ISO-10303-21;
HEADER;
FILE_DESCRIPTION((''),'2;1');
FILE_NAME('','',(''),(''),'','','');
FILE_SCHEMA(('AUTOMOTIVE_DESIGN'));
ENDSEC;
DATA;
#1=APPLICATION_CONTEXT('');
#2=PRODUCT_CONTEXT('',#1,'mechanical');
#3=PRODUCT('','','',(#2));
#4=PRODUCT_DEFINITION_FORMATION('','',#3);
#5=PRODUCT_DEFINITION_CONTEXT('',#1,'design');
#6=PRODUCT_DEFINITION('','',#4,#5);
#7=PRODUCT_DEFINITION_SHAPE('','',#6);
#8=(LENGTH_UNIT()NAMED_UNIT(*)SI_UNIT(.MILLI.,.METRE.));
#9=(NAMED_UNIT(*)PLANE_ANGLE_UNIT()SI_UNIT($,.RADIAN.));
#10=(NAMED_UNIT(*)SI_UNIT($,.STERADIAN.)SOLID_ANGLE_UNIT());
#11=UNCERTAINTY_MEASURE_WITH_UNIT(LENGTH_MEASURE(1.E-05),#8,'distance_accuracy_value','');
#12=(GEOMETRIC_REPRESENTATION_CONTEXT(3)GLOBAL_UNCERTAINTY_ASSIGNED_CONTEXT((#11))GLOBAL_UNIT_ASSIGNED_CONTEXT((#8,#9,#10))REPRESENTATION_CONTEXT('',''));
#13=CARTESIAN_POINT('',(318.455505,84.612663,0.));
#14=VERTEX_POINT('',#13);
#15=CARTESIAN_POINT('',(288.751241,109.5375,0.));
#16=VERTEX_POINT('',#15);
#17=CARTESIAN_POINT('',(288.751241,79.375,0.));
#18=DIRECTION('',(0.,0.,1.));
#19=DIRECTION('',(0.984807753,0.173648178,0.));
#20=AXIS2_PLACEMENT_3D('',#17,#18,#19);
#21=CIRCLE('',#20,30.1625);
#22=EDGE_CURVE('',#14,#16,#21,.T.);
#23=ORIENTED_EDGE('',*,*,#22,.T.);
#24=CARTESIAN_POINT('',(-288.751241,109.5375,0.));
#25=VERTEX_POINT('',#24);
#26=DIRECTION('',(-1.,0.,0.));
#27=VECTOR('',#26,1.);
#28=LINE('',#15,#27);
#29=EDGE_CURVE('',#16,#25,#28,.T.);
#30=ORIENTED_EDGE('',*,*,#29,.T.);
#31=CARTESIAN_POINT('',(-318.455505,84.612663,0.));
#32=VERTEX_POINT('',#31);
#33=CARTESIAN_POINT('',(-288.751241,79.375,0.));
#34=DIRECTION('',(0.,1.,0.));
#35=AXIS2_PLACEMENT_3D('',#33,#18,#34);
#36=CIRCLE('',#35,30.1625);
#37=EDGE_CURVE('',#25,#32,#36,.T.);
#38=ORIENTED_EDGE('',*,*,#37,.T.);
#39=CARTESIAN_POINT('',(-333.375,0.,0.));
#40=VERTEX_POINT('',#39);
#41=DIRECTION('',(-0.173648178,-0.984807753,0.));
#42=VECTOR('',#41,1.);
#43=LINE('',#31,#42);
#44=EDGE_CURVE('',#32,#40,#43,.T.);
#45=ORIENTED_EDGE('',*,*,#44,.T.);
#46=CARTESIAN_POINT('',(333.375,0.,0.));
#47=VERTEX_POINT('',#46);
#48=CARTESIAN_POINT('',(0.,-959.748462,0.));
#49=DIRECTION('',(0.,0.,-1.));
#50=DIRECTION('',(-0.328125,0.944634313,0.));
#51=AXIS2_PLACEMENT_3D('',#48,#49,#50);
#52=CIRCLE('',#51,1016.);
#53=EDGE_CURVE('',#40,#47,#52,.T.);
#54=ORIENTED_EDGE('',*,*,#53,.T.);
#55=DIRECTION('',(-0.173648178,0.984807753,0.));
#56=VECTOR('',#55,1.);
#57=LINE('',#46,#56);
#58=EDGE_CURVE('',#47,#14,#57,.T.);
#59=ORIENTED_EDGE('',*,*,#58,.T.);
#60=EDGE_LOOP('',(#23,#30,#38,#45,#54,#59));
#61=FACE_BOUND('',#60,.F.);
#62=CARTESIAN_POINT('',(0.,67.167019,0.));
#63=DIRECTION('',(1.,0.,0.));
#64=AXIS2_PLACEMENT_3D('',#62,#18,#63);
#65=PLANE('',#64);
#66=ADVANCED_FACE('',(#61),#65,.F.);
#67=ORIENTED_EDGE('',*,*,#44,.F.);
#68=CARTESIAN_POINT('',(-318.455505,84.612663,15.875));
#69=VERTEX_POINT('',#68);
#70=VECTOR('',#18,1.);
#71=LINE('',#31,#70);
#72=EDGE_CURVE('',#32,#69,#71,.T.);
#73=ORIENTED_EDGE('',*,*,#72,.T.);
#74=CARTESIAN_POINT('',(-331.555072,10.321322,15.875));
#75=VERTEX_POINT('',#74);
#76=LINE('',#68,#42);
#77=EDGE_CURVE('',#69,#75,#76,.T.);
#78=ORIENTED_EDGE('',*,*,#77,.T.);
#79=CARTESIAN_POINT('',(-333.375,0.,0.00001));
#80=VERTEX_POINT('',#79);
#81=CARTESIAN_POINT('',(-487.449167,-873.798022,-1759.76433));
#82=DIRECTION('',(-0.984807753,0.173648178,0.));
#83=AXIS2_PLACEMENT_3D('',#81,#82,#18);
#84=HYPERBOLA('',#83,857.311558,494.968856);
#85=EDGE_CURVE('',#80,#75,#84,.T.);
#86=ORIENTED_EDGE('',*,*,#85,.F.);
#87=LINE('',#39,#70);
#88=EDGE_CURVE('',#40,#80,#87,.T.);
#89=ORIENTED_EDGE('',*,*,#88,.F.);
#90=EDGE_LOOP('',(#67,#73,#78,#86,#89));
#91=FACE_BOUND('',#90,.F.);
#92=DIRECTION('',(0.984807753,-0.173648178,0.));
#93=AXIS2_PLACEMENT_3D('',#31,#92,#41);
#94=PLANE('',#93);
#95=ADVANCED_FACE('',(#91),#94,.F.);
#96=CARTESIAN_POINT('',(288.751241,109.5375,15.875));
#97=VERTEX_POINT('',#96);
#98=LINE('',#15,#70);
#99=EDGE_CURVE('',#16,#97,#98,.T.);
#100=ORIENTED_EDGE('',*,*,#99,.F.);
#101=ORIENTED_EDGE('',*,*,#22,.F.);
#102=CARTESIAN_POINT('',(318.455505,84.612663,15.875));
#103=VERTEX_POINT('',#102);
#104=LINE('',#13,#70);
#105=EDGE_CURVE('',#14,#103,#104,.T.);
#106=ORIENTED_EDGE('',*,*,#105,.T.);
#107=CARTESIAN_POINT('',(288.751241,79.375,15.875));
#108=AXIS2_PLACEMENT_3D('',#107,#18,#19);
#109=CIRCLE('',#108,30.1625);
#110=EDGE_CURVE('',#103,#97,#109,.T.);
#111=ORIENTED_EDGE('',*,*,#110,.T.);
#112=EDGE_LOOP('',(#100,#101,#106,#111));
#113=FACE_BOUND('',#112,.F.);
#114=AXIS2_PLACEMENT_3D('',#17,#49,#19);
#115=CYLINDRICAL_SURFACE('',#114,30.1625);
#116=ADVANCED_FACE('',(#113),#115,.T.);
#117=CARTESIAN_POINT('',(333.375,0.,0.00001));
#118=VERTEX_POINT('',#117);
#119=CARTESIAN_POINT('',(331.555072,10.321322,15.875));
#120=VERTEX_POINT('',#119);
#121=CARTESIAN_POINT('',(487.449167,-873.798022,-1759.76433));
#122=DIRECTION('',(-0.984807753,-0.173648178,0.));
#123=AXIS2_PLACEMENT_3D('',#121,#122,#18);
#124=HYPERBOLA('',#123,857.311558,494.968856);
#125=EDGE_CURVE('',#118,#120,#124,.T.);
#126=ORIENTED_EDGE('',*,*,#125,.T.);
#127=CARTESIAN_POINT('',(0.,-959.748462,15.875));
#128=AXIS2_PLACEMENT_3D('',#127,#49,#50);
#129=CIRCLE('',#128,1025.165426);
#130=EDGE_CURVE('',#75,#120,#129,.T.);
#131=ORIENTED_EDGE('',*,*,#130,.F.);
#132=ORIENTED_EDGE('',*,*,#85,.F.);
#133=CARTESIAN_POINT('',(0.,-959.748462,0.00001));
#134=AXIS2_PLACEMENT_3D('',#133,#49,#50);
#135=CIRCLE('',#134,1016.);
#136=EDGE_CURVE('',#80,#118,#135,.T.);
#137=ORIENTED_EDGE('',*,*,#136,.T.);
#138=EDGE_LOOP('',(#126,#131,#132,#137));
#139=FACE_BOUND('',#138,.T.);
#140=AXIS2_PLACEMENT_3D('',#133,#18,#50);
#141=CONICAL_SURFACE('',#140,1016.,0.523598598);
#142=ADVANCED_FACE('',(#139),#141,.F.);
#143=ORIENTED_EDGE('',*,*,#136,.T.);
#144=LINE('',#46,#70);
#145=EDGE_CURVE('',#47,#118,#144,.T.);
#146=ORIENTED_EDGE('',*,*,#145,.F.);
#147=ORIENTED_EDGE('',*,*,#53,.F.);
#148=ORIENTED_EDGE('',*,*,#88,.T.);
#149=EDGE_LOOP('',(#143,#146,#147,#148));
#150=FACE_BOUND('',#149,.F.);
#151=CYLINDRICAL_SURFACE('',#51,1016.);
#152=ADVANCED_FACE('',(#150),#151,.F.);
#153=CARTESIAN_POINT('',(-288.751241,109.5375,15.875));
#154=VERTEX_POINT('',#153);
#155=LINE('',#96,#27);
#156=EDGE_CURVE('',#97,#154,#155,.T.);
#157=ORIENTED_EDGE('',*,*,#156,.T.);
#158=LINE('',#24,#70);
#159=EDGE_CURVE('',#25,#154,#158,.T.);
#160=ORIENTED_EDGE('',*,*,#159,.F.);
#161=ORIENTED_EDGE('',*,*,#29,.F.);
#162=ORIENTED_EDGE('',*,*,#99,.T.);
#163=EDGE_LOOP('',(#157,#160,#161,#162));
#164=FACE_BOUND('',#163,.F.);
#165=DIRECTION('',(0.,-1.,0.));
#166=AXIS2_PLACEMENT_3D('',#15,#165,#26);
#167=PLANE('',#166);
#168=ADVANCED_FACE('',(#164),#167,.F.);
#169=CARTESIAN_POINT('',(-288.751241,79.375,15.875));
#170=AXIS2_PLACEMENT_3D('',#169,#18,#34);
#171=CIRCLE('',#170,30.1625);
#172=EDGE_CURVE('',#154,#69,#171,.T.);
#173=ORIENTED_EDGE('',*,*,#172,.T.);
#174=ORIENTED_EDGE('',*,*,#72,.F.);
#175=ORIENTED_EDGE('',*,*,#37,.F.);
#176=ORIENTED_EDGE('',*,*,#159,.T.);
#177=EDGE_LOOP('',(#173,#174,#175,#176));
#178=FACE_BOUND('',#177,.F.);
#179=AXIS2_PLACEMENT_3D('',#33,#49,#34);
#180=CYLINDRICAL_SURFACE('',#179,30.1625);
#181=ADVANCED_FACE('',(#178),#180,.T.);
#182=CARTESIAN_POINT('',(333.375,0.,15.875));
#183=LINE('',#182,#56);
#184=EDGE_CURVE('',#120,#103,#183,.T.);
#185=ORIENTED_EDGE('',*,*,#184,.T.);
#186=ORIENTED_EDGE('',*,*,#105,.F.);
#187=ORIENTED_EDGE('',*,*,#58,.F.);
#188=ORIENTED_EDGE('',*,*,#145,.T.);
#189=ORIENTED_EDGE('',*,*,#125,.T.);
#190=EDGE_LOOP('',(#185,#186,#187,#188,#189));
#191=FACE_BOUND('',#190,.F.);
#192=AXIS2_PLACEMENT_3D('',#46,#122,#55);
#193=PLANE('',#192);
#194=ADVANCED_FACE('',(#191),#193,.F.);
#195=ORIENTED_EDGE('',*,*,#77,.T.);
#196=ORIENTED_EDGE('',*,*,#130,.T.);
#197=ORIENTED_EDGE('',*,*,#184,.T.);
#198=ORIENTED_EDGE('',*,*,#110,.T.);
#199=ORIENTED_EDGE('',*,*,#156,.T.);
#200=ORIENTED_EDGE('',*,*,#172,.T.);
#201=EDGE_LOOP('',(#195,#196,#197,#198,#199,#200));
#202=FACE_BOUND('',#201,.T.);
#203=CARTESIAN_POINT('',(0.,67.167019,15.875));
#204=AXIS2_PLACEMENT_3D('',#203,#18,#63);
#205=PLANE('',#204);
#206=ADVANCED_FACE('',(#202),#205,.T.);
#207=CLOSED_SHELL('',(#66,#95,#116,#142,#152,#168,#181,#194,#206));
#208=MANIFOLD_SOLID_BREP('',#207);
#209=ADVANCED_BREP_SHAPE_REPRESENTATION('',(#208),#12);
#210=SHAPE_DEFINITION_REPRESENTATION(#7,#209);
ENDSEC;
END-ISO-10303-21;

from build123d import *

# Parameters (mm, degrees)
F1_DEPTH = 15.875
F2_SIZE2 = 9.165426
F2_SIZE  = 15.87499


# Not quite as in the source:
# - a fillet or chamfer is up to 0.001 mm smaller than in the source, because OpenCascade refuses the exact size


with BuildPart() as f1:
    # F0 (on Top) → F1 (new body)
    with BuildSketch(Plane.XY):
        with BuildLine():
            ThreePointArc((-333.375, 0), (0, 56.2515384878), (333.375, 0))
            Line((333.375, 0), (318.4555045755, 84.6126631589))
            ThreePointArc((318.4555045755, 84.6126631589), (308.1393220024, 102.4808155156), (288.7512407253, 109.5375))
            Line((288.7512407253, 109.5375), (-288.7512407253, 109.5375))
            ThreePointArc((-288.7512407253, 109.5375), (-308.1393220024, 102.4808155156), (-318.4555045755, 84.6126631589))
            Line((-318.4555045755, 84.6126631589), (-333.375, 0))
        make_face()
    extrude(amount=F1_DEPTH)

    # F2 (size 15.875 and 9.1654355234 in the source; OpenCascade refuses exactly that, so slightly less here)
    f2_edges = [f1.edges().sort_by_distance(p)[0] for p in [
        (0, 56.251538, 15.875),
    ]]
    f2_side = f1.faces().sort_by_distance((0, 56.251538, 7.9375))[0]
    chamfer(f2_edges, length=F2_SIZE, length2=F2_SIZE2, reference=f2_side)


solid = f1.part
